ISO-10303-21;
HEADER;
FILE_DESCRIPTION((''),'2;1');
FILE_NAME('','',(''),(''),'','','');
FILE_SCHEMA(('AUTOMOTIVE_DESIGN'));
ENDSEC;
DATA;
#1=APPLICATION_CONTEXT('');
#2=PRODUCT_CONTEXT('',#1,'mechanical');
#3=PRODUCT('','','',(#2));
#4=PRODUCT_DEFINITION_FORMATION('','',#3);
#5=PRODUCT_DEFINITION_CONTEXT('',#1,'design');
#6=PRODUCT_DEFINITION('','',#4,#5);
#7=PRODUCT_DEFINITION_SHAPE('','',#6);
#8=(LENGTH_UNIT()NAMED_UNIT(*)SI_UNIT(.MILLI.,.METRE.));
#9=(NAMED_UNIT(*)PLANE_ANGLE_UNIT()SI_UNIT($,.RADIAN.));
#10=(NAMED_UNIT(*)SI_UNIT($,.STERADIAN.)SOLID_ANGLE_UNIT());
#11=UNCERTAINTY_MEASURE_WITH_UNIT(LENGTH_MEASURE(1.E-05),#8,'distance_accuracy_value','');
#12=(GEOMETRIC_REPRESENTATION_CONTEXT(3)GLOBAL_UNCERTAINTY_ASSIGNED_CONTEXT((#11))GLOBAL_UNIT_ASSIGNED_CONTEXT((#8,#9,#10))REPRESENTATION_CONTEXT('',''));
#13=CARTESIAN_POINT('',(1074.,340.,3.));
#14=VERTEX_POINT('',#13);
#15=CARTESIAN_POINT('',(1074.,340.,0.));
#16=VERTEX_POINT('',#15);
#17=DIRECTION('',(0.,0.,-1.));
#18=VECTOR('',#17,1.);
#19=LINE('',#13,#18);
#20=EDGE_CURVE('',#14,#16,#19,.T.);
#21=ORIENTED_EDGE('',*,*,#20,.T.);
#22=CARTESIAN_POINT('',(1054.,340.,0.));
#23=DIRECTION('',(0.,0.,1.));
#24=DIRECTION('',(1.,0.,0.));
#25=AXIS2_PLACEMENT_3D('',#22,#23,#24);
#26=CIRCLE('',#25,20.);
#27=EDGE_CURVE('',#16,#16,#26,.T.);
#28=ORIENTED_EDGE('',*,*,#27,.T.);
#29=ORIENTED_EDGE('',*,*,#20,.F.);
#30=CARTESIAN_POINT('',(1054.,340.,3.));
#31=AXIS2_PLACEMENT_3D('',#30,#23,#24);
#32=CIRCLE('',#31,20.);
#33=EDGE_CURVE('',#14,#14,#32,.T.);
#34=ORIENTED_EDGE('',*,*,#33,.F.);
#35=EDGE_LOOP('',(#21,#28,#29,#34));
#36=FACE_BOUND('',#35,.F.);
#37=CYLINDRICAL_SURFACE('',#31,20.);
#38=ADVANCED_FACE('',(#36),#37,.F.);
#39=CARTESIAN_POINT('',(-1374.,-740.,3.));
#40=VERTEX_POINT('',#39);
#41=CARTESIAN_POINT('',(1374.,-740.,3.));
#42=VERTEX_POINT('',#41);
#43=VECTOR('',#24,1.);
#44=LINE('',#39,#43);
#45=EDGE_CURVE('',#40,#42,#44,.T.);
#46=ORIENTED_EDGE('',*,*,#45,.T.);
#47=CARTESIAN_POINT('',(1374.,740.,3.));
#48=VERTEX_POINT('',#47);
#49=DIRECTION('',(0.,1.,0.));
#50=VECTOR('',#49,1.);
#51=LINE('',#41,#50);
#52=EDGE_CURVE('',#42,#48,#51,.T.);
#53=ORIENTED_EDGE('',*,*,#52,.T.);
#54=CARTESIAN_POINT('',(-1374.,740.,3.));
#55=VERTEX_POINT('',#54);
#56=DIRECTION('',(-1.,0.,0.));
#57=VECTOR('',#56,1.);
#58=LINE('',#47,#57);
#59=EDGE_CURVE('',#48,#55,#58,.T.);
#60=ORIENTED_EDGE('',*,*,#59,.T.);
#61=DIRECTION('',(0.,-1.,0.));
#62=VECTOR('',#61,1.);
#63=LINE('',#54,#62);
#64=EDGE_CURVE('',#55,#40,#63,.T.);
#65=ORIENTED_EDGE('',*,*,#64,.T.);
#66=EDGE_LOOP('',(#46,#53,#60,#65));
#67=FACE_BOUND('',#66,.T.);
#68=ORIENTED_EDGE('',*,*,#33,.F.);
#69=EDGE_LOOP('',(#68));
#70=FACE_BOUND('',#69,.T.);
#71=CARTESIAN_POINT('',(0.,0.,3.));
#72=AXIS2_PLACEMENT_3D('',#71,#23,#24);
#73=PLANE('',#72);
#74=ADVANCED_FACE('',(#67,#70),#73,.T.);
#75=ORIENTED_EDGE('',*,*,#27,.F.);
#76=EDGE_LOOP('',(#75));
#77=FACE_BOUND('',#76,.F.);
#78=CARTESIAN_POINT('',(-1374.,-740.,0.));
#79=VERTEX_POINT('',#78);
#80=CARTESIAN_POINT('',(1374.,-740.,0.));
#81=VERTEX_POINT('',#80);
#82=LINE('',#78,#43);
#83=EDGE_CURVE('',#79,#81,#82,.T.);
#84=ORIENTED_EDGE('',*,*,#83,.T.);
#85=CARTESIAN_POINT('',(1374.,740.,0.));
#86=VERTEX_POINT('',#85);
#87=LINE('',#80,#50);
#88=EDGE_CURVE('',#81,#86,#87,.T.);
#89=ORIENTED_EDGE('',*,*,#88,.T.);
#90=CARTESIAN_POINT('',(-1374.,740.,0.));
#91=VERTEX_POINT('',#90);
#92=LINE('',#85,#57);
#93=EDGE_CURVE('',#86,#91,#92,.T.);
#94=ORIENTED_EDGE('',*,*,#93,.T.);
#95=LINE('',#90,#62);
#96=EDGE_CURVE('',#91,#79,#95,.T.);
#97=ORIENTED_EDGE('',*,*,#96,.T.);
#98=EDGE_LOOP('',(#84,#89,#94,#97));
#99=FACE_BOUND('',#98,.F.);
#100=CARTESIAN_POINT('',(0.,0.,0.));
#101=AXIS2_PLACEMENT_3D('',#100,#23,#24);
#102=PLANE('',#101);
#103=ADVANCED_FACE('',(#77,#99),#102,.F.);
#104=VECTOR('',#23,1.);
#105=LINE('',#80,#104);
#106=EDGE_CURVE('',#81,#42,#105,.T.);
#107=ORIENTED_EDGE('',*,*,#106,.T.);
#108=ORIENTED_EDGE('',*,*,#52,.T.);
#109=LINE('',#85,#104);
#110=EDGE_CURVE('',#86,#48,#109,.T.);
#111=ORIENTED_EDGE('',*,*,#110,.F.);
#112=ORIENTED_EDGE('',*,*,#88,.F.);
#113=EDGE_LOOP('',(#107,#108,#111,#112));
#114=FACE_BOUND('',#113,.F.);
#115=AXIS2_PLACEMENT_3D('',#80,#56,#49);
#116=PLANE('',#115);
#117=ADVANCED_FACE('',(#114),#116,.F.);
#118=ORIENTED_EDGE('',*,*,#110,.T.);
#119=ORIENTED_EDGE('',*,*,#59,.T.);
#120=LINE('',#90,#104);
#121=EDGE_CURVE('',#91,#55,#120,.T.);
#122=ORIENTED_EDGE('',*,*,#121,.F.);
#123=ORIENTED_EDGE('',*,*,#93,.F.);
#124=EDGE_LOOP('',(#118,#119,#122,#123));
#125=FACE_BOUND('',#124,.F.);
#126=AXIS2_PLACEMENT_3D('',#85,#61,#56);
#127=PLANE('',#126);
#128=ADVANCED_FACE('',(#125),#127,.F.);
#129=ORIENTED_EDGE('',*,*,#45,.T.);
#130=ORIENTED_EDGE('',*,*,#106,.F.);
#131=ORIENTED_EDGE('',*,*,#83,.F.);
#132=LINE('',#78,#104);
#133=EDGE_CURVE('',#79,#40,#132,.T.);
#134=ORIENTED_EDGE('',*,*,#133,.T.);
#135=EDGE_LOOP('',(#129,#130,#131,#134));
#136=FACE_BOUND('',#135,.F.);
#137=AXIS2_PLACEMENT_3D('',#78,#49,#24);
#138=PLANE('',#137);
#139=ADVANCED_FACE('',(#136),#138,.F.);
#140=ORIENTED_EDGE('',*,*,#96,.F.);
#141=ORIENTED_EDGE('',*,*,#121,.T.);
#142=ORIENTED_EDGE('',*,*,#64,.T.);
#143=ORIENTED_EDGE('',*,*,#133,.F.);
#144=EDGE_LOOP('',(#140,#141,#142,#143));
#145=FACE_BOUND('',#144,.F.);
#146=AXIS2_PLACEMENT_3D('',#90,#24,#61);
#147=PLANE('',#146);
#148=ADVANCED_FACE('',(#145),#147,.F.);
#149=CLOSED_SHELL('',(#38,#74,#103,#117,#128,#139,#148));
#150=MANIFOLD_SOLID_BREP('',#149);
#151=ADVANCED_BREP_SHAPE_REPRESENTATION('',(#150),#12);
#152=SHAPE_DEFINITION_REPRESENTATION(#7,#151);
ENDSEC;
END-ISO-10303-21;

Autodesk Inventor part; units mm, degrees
ref_plane "YZ Plane" through (0, 0, 0) normal (1, 0, 0) x (0, 1, 0)
ref_plane "XZ Plane" through (0, 0, 0) normal (0, 1, 0) x (-1, 0, 0)
ref_plane "XY Plane" through (0, 0, 0) normal (0, 0, 1) x (1, 0, 0)
sketch "Sketch1" plane through (0, 0, 0) normal (0, 0, 1) x (1, 0, 0)
  line L0 (-1374, -740) -> (1374, -740)
  line L1 (1374, -740) -> (1374, 740)
  line L2 (1374, 740) -> (-1374, 740)
  line L3 (-1374, 740) -> (-1374, -740)
  line L4 (-1374, -740) -> (1374, 740) construction
  line L5 (1374, -740) -> (-1374, 740) construction
  point P0 (0, 0)
  dimension "d0" = 2748
  dimension "d1" = 1480
extrude "Plate1" add sketch "Sketch1" along normal blind 3
sketch "Sketch5" plane through (0, 0, 3) normal (0, 0, 1) x (1, 0, 0)
  line L0 (1349, 715) -> (1349, 515) construction
  line L1 (1349, 515) -> (1334, 515) construction
  line L2 (1334, 515) -> (1334, 715) construction
  line L3 (1334, 715) -> (1349, 715) construction
  line L4 (1374, 740) -> (1374, -740) projected
  line L5 (-1374, 740) -> (1374, 740) projected
  point P0 (0, 0)
  dimension "d26" = 200
  dimension "d27" = 15
  dimension "d28" = 25
  dimension "d29" = 25
mark "Mark1"
sketch "Sketch6" plane through (-1374, -740, 3) normal (0, 0, 1) x (1, 0, 0)
  circle A0 centre (2428, 1080) radius 20
  line L0 (0, 1480) -> (2748, 1480) projected
  line L1 (2748, 1480) -> (2748, 0) projected
  point P0 (1374, 740)
  dimension "d30" = 40
  dimension "d31" = 400
  dimension "d32" = 320
extrude "Extrusion2" cut sketch "Sketch6" against normal up to surface (3 mm away)
equation "\"d2\" = Thickness"
equation "\"BendReliefWidth\" = Thickness"
equation "\"BendReliefDepth\" = 0.5 * Thickness"
equation "\"CornerReliefSize\" = 4 * Thickness"
equation "\"MinimumRemnant\" = 2 * Thickness"
equation "\"TransitionRadius\" = BendRadius"
equation "\"JacobiRadiusSize\" = BendRadius"
equation "\"GapSize\" = Thickness"
equation "\"Thickness\" = 3"
equation "\"BendRadius\" = 5"
properties part number "BSH 042 board" material "09g2s"
